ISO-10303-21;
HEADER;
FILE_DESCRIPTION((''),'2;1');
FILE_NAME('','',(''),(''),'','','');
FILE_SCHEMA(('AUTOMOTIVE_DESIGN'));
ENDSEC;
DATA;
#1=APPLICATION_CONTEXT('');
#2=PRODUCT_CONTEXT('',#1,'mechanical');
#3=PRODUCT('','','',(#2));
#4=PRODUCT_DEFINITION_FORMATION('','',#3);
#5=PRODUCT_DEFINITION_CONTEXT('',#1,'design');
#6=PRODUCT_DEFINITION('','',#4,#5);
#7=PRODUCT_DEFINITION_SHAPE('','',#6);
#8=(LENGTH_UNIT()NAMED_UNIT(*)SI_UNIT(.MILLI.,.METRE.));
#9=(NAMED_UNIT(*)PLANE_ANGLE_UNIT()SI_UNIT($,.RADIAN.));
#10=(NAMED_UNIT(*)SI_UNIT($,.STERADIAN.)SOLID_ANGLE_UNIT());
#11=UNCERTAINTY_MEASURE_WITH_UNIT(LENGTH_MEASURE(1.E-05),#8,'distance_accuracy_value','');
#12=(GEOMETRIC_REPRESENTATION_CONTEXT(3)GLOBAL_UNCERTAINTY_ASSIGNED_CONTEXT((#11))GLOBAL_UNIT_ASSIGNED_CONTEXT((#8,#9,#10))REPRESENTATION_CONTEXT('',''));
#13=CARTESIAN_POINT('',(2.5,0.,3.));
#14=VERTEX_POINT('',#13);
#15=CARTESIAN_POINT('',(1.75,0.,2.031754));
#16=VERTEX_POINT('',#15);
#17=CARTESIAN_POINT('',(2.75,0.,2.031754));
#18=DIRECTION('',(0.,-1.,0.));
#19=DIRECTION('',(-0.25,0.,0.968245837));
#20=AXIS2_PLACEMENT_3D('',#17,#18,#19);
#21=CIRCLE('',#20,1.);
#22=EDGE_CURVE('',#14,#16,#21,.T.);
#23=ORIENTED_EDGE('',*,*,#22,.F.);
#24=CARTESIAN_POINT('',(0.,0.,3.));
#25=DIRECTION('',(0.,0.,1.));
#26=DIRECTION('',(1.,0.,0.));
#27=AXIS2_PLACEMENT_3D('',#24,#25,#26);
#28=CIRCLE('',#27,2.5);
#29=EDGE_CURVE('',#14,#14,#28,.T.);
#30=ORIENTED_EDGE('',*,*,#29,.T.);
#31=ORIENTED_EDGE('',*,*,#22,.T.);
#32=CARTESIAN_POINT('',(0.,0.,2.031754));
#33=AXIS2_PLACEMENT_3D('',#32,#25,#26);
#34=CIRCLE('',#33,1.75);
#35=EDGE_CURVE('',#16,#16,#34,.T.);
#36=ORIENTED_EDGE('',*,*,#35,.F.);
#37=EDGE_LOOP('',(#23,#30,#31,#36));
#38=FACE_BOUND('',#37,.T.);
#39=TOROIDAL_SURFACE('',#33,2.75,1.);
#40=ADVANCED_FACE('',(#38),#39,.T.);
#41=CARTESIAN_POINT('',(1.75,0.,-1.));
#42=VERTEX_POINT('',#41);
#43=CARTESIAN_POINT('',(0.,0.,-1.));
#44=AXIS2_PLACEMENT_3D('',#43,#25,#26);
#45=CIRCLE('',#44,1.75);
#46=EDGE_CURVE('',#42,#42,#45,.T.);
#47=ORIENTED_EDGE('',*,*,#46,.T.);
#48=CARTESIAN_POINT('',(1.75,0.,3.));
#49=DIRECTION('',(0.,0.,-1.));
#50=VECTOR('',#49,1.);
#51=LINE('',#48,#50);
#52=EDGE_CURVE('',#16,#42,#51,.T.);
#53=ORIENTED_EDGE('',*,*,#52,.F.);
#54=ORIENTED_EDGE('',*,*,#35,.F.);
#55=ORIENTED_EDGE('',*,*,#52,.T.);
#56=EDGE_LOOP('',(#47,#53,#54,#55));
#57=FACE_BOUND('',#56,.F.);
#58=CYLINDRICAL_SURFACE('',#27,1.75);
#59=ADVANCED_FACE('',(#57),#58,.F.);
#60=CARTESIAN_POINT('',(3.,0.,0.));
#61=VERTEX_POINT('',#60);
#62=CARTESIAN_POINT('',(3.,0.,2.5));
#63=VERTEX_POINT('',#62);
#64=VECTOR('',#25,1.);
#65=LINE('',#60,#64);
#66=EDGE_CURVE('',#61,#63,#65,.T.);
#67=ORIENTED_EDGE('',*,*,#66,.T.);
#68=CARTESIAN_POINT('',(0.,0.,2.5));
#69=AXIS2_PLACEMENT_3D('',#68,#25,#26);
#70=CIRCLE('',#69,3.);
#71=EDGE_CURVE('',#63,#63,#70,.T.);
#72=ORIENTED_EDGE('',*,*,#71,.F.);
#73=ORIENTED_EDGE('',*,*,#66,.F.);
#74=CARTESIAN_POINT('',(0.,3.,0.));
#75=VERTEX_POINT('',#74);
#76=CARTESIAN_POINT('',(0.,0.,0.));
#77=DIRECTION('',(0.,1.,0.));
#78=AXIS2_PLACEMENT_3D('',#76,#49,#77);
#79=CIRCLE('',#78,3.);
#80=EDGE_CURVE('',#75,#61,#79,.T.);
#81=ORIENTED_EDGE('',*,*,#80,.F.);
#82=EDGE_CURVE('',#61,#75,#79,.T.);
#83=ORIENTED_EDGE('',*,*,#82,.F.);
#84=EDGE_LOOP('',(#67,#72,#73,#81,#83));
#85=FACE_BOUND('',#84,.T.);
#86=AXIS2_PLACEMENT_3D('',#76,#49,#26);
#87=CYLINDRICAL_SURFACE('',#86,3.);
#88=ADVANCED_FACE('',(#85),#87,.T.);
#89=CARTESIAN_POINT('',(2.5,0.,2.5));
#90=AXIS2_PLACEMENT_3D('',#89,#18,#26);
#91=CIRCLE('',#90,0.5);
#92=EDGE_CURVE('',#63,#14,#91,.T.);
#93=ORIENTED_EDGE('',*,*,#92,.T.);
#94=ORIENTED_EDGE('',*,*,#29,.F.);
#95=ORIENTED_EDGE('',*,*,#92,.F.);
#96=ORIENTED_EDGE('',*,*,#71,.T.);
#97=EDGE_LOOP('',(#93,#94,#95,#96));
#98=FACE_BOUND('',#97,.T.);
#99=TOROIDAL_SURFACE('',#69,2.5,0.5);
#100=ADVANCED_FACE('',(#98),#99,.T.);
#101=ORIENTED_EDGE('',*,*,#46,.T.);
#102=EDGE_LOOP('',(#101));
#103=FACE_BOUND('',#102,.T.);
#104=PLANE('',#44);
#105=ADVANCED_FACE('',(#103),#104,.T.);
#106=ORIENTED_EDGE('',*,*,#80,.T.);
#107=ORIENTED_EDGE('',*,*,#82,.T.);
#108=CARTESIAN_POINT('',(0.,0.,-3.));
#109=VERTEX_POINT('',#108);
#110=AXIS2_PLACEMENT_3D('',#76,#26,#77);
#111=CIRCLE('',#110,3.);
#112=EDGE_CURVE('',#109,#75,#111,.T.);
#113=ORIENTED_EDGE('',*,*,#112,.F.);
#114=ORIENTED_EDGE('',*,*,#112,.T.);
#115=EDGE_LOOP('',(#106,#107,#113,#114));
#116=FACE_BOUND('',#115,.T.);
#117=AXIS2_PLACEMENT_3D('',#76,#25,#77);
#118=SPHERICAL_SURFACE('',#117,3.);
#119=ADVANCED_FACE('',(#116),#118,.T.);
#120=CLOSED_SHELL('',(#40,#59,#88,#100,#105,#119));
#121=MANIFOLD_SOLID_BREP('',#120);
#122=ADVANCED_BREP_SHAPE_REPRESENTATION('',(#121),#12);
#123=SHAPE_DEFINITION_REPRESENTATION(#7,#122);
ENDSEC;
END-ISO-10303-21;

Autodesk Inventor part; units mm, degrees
ref_plane "YZ Plane" through (0, 0, 0) normal (1, 0, 0) x (0, 1, 0)
ref_plane "XZ Plane" through (0, 0, 0) normal (0, 1, 0) x (-1, 0, 0)
ref_plane "XY Plane" through (0, 0, 0) normal (0, 0, 1) x (1, 0, 0)
sketch "Sketch1" plane through (0, 0, 0) normal (1, 0, 0) x (0, 1, 0)
  circle A0 centre (0, 0) radius 3
  line L0 (3.6994, 0) -> (-3.9504, 0)
  line L1 (0, 0) -> (0, -4.1151)
  point P0 (0, -3)
  point P1 (3, 0)
  dimension "d0" = 6
revolve "Revolution1" add sketch "Sketch1" angle 360 about axis through (0, 0, 0) along (0, 0, -1) picked at (1.6828, -1.0574) contours A0 L1 L0
sketch "Sketch2" plane through (0, 0, 0) normal (0, 0, 1) x (1, 0, 0)
  circle A0 centre (0, 0) radius 3 projected
extrude "Extrusion1" add sketch "Sketch2" along normal blind 3
sketch "Sketch3" plane through (0, 0, 3) normal (0, 0, 1) x (1, 0, 0)
  circle A0 centre (0, 0) radius 1.75
  dimension "d4" = 3.5
extrude "Extrusion2" cut sketch "Sketch3" against normal blind 4
thread "Thread1" size "M3x0.5" class "6H" standard "ANSI Metric M Profile" length 53
fillet "Fillet1" radius 0.5 1 edges at (-3, 0, 3)
fillet "Fillet2" radius 1 1 edges at (-1.75, 0, 3)
properties part number "torniquete"
